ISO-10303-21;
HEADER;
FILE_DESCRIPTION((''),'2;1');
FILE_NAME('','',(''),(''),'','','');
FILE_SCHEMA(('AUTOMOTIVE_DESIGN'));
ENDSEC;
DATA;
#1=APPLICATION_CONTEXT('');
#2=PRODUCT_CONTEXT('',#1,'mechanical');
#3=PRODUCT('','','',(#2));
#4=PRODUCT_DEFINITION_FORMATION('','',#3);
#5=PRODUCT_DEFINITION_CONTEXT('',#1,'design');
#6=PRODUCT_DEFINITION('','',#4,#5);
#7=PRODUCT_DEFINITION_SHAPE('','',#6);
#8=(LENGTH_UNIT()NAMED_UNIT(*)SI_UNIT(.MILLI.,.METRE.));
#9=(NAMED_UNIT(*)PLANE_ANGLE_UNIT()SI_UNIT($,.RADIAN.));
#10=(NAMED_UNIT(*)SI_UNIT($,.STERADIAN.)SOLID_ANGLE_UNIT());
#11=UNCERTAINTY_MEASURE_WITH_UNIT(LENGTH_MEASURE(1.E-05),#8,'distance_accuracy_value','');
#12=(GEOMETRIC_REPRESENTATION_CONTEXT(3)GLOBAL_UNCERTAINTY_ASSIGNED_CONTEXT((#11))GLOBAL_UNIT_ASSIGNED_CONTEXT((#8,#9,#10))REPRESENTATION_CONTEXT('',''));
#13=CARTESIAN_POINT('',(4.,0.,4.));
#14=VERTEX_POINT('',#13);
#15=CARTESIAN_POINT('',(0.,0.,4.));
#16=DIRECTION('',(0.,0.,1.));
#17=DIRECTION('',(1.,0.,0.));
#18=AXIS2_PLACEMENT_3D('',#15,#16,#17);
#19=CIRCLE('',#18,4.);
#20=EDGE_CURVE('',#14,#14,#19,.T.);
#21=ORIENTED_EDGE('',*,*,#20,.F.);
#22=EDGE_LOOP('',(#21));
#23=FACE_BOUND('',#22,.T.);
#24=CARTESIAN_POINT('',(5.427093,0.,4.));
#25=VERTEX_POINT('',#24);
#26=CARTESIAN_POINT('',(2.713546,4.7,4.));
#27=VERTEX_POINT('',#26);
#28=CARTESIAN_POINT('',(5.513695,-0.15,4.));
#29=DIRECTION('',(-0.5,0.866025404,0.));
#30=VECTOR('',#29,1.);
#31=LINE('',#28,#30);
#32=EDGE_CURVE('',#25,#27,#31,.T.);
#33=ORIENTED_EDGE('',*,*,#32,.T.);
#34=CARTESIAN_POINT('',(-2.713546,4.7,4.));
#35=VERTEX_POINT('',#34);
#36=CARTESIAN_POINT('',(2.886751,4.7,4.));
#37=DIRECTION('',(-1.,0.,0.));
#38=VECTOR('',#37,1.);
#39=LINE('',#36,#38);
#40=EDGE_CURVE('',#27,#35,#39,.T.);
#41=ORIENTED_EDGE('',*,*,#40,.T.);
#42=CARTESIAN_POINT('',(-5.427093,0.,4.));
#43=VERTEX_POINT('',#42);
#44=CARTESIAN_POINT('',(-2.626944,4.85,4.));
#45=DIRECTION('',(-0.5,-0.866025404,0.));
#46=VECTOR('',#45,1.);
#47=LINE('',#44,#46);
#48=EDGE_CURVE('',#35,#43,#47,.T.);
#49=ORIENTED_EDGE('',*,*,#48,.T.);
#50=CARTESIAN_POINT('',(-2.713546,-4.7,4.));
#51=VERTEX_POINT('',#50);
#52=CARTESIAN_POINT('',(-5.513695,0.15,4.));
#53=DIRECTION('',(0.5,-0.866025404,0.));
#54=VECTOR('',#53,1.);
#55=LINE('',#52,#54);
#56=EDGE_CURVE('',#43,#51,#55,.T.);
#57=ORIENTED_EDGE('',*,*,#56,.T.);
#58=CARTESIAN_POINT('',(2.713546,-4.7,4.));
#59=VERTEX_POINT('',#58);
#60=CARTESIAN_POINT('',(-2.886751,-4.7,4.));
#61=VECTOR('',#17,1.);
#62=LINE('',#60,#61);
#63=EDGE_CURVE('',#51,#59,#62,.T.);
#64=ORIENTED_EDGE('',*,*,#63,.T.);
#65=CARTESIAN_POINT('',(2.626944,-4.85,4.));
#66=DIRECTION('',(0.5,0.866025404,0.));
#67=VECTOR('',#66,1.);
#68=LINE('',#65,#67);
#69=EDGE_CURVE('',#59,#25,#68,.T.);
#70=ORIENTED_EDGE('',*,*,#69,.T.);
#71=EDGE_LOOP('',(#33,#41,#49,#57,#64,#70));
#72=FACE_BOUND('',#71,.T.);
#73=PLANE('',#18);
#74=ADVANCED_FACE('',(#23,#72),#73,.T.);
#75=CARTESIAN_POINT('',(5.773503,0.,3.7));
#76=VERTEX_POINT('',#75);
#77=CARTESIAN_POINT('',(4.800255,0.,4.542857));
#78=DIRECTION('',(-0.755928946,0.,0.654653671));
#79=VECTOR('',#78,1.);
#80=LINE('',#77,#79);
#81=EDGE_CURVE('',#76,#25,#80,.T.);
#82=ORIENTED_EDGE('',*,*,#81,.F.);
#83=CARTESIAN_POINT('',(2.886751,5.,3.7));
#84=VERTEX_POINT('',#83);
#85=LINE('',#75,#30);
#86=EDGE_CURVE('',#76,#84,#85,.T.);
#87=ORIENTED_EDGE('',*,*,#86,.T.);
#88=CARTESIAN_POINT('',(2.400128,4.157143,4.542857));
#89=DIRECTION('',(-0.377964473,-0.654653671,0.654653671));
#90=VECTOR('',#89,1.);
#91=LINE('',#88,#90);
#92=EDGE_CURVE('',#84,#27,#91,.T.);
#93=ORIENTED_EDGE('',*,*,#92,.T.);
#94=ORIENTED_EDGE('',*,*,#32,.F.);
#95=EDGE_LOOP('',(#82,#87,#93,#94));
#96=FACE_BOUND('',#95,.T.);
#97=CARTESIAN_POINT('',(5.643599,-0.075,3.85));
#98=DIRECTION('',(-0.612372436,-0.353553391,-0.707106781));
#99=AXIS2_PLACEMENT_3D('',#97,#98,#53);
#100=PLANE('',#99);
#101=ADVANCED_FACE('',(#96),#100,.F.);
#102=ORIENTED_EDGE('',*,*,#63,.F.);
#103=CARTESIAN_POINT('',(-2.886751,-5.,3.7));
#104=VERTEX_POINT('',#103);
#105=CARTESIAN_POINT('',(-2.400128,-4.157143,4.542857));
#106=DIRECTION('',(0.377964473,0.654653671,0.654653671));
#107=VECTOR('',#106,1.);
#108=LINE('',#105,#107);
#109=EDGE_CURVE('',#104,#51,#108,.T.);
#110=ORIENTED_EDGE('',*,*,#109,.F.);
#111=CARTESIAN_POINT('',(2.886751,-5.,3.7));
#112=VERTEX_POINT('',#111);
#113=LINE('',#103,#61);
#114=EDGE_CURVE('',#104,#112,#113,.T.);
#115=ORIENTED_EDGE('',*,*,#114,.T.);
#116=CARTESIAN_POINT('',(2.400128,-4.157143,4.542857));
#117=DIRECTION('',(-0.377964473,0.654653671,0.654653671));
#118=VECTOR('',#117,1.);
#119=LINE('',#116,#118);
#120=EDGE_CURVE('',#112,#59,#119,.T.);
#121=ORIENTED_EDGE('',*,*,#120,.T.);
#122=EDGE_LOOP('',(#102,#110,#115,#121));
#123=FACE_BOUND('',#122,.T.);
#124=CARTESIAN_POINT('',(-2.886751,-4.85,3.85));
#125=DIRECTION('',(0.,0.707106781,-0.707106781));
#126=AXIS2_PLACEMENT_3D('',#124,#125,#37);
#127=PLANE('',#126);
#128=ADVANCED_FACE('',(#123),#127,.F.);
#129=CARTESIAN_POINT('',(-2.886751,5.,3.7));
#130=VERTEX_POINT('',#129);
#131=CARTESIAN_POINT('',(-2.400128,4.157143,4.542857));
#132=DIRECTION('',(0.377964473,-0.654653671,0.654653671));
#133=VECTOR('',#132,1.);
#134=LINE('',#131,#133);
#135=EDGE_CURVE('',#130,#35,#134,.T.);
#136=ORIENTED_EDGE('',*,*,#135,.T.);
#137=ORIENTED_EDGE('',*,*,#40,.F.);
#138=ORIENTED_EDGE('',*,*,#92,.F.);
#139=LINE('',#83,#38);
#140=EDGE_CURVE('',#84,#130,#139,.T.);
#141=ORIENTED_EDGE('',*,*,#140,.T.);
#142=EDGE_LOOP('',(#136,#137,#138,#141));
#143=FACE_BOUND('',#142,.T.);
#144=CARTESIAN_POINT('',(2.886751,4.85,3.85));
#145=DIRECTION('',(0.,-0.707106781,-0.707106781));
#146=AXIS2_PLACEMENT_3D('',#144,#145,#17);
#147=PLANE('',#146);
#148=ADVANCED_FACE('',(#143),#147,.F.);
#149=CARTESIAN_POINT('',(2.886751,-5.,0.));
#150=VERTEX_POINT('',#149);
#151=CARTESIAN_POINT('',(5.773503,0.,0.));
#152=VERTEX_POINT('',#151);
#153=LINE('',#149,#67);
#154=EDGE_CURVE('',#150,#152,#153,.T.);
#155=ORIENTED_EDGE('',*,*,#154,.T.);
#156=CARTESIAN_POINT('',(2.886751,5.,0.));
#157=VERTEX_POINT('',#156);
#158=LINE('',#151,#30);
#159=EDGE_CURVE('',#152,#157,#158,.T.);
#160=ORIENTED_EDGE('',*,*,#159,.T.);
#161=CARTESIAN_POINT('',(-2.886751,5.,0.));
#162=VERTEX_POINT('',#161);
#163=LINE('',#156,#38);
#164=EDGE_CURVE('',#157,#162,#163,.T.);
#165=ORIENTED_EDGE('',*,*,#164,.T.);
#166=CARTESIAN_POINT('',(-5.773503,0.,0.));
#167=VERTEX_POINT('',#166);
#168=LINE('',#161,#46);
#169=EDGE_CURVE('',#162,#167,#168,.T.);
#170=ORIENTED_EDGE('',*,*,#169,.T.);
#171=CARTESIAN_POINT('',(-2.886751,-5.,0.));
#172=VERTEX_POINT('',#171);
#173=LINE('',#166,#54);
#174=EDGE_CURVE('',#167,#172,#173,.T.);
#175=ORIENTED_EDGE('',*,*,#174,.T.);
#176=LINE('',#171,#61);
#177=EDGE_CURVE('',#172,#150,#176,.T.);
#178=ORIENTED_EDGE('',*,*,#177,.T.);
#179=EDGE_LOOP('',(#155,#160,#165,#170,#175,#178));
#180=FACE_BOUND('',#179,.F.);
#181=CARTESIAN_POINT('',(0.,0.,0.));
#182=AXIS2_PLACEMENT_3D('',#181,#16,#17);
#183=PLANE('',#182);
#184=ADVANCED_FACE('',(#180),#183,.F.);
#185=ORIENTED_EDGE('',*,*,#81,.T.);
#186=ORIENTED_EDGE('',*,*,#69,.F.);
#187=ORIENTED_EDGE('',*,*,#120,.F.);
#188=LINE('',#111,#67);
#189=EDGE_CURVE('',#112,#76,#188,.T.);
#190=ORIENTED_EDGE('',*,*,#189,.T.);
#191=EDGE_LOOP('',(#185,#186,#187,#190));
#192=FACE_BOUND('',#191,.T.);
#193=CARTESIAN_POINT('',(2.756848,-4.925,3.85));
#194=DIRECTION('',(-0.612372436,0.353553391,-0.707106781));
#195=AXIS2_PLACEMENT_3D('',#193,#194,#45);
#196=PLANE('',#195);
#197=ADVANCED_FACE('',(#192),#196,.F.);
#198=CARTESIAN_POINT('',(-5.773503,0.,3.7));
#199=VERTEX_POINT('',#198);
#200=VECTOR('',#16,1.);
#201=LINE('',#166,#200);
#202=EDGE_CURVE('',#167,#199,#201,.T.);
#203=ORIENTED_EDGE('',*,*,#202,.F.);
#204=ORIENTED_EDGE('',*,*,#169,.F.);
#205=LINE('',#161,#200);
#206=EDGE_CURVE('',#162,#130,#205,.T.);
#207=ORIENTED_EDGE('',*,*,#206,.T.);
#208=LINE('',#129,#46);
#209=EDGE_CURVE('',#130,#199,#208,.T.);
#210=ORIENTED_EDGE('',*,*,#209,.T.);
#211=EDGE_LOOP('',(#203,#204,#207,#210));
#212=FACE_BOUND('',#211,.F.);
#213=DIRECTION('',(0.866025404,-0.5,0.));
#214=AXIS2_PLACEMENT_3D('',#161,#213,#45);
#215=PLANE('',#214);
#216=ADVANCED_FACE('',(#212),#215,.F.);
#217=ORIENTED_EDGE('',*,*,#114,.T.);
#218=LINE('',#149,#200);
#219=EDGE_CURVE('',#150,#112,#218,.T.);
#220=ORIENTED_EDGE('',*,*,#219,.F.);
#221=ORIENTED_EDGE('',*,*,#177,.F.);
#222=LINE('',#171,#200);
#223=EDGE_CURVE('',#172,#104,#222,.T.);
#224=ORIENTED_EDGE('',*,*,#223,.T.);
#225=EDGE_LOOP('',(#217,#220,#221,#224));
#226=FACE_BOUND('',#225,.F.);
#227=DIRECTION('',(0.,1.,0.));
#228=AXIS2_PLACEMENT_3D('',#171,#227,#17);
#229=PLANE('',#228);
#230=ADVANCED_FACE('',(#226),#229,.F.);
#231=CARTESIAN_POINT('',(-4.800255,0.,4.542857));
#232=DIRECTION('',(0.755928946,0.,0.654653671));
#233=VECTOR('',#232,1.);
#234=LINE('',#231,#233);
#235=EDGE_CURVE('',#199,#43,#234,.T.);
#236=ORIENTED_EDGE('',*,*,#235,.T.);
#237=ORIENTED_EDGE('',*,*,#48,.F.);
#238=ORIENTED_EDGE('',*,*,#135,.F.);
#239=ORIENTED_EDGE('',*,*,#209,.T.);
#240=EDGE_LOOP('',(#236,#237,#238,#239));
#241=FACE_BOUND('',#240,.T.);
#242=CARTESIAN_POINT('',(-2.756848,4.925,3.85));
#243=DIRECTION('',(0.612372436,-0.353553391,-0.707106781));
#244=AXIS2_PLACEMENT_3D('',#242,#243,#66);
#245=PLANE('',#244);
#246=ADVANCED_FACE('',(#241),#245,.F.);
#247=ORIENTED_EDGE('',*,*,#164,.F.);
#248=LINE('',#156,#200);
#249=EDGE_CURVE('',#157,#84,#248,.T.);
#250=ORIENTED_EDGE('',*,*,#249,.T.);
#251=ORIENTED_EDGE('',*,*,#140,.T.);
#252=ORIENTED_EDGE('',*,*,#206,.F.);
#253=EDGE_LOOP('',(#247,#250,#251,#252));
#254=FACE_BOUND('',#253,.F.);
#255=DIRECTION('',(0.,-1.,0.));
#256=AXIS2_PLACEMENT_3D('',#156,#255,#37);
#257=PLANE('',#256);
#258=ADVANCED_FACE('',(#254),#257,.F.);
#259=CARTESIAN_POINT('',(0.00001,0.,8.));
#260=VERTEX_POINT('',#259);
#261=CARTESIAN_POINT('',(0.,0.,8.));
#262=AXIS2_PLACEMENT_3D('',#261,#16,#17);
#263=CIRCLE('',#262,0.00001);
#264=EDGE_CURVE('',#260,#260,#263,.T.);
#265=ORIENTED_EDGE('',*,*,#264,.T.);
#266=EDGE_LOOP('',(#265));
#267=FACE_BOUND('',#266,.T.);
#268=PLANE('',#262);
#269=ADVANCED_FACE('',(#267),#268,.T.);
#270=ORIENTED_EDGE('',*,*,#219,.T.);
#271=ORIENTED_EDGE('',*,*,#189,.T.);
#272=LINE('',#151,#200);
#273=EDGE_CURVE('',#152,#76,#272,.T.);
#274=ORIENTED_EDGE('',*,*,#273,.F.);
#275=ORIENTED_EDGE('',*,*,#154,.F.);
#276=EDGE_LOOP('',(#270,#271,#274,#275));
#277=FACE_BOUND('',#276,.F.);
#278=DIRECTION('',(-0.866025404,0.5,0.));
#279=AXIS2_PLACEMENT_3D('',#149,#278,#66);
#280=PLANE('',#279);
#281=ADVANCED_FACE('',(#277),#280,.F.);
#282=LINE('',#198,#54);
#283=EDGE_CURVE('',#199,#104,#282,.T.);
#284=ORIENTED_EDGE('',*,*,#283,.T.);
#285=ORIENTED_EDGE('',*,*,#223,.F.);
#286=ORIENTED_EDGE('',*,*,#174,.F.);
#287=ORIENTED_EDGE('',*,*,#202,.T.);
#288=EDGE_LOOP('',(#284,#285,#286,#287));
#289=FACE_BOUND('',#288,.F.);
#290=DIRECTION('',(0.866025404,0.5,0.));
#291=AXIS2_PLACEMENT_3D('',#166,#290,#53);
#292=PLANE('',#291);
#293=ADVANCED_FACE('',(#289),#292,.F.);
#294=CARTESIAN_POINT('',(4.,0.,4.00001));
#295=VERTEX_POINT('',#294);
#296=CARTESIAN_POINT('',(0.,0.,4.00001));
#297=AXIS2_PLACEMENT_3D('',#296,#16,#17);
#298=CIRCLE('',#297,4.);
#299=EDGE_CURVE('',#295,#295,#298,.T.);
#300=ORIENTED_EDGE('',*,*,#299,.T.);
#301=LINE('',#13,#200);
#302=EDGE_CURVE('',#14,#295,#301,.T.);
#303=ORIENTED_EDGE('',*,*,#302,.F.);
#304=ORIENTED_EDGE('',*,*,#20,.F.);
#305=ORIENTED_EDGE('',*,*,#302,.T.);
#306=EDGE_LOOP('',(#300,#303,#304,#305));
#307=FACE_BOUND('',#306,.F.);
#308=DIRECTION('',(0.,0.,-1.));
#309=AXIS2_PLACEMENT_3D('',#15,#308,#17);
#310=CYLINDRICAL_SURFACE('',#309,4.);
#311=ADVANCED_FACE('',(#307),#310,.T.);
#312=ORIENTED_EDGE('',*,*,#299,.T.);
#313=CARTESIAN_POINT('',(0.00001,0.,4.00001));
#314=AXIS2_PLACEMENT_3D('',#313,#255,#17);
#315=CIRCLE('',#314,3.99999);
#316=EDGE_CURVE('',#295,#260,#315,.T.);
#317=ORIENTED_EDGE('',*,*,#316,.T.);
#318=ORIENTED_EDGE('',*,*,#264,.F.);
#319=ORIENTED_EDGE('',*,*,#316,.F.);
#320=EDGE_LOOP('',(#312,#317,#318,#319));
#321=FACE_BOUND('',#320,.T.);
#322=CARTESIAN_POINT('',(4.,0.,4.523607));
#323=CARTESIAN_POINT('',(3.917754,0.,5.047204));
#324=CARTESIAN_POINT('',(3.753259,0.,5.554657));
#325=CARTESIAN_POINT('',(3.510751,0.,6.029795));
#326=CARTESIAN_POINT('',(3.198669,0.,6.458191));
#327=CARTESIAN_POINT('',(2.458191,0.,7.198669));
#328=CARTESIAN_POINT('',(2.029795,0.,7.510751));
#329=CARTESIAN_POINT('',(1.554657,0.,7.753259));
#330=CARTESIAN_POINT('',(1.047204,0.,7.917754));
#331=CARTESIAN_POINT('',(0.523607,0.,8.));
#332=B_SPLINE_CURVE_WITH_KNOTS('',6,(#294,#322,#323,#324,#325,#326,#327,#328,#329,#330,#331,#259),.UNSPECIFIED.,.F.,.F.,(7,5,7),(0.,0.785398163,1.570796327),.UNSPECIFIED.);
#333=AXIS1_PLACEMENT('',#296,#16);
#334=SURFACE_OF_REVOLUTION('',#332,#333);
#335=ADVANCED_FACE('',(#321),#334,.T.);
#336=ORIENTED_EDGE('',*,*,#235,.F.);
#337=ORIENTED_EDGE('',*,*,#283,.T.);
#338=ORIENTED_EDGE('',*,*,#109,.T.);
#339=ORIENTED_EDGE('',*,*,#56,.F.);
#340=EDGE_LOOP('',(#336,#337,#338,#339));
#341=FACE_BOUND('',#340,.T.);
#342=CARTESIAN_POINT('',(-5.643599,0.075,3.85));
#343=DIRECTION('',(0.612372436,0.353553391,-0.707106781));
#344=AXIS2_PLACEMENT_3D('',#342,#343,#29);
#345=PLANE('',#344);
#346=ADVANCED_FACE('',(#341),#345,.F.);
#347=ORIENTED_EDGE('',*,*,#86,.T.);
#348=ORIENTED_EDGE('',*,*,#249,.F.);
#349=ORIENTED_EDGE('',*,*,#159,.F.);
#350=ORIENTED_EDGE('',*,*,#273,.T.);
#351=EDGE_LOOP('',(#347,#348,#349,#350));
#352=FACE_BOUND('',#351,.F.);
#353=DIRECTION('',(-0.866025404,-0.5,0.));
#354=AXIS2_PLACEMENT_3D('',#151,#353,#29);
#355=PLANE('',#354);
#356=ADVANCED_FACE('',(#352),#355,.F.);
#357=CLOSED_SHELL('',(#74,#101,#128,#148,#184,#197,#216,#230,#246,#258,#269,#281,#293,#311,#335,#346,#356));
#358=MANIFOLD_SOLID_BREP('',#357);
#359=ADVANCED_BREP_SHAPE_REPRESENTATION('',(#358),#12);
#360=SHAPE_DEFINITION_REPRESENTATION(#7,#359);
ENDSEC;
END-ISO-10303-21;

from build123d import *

# Parameters (mm, degrees)
F1_DEPTH = 4
F2_SIZE  = 0.3
F3_R     = 4
F4_DEPTH = 4
F5_R     = 3.99999


# Not quite as in the source:
# - a fillet or chamfer is up to 0.001 mm smaller than in the source, because OpenCascade refuses the exact size


with BuildPart() as f1:
    # F0 (on Top) → F1 (new body)
    with BuildSketch(Plane.XY):
        Polygon((2.8867513459, 5), (-2.8867513459, 5), (-5.7735026919, 0), (-2.8867513459, -5), (2.8867513459, -5), (5.7735026919, 0), align=None)
    extrude(amount=F1_DEPTH)

    # F2
    f2_edges = [f1.edges().sort_by_distance(p)[0] for p in [
        (4.330127, -2.5, 4),
        (0, -5, 4),
        (4.330127, 2.5, 4),
        (-4.330127, -2.5, 4),
        (-4.330127, 2.5, 4),
        (0, 5, 4),
    ]]
    chamfer(f2_edges, length=F2_SIZE)

    # F3 (on face) → F4 (join)
    with BuildSketch(Plane.XY.offset(4)):
        Circle(F3_R)
    extrude(amount=F4_DEPTH)

    # F5 (radius 4 in the source; OpenCascade refuses exactly that, so slightly less here)
    f5_edges = [f1.edges().sort_by_distance(p)[0] for p in [
        (-4, 0, 8),
    ]]
    fillet(f5_edges, radius=F5_R)


solid = f1.part
